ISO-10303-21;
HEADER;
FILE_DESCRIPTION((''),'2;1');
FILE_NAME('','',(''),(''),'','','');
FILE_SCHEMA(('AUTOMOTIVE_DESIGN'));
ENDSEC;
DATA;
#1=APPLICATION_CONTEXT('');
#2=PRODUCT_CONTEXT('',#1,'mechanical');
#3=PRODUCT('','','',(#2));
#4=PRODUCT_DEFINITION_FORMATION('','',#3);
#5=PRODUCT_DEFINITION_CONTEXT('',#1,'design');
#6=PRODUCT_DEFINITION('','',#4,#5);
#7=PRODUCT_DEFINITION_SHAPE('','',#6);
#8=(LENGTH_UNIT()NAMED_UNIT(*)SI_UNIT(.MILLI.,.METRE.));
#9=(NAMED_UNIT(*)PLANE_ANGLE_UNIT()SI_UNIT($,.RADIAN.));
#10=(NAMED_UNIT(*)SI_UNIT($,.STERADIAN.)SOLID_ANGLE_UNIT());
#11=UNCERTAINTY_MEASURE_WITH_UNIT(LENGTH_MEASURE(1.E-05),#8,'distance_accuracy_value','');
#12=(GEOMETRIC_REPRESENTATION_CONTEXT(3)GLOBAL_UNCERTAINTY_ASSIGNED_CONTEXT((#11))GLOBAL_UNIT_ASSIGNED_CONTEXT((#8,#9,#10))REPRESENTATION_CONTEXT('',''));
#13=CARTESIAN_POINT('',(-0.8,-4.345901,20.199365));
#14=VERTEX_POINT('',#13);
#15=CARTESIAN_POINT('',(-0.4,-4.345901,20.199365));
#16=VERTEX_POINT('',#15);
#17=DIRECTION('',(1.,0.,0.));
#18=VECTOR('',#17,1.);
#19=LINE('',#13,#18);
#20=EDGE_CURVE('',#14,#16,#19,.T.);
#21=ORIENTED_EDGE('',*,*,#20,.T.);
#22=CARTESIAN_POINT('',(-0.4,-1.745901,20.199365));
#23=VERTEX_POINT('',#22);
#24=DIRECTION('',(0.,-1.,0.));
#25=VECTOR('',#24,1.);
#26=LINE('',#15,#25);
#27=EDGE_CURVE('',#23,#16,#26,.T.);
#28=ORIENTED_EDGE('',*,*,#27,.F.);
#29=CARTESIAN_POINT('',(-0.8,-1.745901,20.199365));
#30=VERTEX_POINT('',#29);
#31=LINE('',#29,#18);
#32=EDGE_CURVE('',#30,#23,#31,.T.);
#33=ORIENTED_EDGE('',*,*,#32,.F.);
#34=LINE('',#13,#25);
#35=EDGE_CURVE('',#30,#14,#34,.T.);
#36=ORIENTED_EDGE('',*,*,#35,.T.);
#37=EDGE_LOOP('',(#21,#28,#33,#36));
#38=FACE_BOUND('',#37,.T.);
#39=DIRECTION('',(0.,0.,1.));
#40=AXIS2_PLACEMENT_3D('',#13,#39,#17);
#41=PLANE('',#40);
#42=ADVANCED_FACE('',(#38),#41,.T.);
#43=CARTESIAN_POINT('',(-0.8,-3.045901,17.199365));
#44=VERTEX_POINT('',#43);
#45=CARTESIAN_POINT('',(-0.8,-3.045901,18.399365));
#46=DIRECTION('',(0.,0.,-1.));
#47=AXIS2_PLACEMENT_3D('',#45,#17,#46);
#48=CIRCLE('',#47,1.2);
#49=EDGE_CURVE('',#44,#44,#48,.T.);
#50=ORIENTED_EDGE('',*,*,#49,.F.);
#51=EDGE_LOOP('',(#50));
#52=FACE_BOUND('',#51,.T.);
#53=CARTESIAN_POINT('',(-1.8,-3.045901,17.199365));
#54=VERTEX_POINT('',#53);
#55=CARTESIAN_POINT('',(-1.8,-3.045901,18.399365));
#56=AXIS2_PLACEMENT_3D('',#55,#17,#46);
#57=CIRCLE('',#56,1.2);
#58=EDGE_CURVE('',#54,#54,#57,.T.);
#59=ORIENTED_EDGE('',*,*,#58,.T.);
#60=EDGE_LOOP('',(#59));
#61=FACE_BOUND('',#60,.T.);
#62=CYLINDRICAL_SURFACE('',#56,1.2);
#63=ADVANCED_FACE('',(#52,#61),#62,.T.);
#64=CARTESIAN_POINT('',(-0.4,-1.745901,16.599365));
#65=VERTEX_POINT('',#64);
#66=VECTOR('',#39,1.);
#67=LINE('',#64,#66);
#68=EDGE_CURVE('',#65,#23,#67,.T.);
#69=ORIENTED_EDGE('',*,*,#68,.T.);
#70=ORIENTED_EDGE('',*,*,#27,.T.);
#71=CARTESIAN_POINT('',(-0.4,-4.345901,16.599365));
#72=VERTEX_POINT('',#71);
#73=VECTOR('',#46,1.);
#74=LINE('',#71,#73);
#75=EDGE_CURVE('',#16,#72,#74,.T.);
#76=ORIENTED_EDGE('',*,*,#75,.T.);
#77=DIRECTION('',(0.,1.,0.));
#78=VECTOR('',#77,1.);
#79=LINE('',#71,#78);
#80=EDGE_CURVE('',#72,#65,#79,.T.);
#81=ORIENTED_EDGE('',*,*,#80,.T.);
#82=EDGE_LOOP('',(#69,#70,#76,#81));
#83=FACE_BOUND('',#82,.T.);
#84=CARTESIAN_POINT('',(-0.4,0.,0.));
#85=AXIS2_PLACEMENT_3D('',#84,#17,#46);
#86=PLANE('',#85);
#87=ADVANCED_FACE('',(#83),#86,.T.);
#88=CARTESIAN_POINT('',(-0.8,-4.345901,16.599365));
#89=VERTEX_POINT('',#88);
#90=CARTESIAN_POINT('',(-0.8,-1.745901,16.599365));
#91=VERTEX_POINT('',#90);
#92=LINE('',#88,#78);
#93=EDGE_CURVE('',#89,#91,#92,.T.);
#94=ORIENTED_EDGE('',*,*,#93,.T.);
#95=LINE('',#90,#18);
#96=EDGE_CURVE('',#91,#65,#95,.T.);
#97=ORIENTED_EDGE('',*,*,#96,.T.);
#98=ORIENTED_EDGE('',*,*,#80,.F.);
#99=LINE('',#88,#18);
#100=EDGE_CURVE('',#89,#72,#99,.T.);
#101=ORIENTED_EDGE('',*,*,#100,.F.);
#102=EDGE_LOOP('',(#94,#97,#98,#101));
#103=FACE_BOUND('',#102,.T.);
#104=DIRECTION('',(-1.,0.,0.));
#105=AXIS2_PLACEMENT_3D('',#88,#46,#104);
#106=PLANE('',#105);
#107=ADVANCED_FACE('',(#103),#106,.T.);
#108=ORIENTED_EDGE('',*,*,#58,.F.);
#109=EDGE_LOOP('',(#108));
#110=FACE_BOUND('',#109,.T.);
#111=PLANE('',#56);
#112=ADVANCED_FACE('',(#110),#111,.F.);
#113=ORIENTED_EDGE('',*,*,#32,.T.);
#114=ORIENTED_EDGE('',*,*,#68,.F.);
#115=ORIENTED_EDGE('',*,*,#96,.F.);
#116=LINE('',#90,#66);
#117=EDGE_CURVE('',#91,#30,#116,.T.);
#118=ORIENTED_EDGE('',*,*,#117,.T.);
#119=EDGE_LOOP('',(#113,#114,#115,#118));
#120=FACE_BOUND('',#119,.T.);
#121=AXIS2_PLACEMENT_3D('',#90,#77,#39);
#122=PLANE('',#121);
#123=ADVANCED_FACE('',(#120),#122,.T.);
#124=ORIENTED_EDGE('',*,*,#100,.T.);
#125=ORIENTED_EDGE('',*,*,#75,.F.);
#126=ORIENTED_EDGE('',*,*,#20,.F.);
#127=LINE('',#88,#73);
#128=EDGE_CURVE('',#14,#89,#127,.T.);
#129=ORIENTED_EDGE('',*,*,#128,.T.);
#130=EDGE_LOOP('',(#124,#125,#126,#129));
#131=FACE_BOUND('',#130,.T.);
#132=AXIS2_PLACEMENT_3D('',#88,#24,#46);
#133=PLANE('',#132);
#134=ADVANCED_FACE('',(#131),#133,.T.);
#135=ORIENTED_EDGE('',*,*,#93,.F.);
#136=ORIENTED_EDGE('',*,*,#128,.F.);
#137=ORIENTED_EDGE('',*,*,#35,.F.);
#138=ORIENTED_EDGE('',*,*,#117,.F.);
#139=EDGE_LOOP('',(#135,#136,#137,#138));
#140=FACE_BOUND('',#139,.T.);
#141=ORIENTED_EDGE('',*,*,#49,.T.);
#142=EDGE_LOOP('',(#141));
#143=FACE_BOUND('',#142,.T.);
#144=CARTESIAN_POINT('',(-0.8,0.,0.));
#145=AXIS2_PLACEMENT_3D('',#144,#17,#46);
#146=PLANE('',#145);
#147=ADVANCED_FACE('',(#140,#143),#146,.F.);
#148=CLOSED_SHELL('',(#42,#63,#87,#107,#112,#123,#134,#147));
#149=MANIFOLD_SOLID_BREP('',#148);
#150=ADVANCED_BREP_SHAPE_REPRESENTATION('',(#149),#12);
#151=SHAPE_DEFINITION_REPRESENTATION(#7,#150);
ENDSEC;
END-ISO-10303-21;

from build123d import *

# Parameters (mm, degrees)
AUFSATZ_LINEAR_START                = -0.4
AUFSATZ_LINEAR_AUSTRAGEN1_OUTLINE_W = 3.6
AUFSATZ_LINEAR_AUSTRAGEN1_OUTLINE_H = 2.6
AUFSATZ_LINEAR_AUSTRAGEN1_DEPTH     = 0.4
SKIZZE2_R                           = 1.2
AUFSATZ_LINEAR_AUSTRAGEN2_DEPTH     = 1


# Read off the part's stored shape, not the designer's step: Aufsatz-Linear austragen1
with BuildPart() as part:
    # Aufsatz-Linear austragen1 outline → Aufsatz-Linear austragen1 (new body)
    with BuildSketch(Plane(origin=(-0.4, 0, 0), x_dir=(0, 0, -1), z_dir=(1, 0, 0)).offset(AUFSATZ_LINEAR_START)):
        with Locations((-18.399365347, -3.04590093)):
            Rectangle(AUFSATZ_LINEAR_AUSTRAGEN1_OUTLINE_W, AUFSATZ_LINEAR_AUSTRAGEN1_OUTLINE_H)
    extrude(amount=AUFSATZ_LINEAR_AUSTRAGEN1_DEPTH)

    # Skizze2 → Aufsatz-Linear austragen2 (add)
    with BuildSketch(Plane(origin=(-0.8, 0, 0), x_dir=(0, 0, -1), z_dir=(1, 0, 0))):
        with Locations((-18.399365347, -3.04590093)):
            Circle(SKIZZE2_R)
    extrude(amount=-AUFSATZ_LINEAR_AUSTRAGEN2_DEPTH)


solid = part.part
